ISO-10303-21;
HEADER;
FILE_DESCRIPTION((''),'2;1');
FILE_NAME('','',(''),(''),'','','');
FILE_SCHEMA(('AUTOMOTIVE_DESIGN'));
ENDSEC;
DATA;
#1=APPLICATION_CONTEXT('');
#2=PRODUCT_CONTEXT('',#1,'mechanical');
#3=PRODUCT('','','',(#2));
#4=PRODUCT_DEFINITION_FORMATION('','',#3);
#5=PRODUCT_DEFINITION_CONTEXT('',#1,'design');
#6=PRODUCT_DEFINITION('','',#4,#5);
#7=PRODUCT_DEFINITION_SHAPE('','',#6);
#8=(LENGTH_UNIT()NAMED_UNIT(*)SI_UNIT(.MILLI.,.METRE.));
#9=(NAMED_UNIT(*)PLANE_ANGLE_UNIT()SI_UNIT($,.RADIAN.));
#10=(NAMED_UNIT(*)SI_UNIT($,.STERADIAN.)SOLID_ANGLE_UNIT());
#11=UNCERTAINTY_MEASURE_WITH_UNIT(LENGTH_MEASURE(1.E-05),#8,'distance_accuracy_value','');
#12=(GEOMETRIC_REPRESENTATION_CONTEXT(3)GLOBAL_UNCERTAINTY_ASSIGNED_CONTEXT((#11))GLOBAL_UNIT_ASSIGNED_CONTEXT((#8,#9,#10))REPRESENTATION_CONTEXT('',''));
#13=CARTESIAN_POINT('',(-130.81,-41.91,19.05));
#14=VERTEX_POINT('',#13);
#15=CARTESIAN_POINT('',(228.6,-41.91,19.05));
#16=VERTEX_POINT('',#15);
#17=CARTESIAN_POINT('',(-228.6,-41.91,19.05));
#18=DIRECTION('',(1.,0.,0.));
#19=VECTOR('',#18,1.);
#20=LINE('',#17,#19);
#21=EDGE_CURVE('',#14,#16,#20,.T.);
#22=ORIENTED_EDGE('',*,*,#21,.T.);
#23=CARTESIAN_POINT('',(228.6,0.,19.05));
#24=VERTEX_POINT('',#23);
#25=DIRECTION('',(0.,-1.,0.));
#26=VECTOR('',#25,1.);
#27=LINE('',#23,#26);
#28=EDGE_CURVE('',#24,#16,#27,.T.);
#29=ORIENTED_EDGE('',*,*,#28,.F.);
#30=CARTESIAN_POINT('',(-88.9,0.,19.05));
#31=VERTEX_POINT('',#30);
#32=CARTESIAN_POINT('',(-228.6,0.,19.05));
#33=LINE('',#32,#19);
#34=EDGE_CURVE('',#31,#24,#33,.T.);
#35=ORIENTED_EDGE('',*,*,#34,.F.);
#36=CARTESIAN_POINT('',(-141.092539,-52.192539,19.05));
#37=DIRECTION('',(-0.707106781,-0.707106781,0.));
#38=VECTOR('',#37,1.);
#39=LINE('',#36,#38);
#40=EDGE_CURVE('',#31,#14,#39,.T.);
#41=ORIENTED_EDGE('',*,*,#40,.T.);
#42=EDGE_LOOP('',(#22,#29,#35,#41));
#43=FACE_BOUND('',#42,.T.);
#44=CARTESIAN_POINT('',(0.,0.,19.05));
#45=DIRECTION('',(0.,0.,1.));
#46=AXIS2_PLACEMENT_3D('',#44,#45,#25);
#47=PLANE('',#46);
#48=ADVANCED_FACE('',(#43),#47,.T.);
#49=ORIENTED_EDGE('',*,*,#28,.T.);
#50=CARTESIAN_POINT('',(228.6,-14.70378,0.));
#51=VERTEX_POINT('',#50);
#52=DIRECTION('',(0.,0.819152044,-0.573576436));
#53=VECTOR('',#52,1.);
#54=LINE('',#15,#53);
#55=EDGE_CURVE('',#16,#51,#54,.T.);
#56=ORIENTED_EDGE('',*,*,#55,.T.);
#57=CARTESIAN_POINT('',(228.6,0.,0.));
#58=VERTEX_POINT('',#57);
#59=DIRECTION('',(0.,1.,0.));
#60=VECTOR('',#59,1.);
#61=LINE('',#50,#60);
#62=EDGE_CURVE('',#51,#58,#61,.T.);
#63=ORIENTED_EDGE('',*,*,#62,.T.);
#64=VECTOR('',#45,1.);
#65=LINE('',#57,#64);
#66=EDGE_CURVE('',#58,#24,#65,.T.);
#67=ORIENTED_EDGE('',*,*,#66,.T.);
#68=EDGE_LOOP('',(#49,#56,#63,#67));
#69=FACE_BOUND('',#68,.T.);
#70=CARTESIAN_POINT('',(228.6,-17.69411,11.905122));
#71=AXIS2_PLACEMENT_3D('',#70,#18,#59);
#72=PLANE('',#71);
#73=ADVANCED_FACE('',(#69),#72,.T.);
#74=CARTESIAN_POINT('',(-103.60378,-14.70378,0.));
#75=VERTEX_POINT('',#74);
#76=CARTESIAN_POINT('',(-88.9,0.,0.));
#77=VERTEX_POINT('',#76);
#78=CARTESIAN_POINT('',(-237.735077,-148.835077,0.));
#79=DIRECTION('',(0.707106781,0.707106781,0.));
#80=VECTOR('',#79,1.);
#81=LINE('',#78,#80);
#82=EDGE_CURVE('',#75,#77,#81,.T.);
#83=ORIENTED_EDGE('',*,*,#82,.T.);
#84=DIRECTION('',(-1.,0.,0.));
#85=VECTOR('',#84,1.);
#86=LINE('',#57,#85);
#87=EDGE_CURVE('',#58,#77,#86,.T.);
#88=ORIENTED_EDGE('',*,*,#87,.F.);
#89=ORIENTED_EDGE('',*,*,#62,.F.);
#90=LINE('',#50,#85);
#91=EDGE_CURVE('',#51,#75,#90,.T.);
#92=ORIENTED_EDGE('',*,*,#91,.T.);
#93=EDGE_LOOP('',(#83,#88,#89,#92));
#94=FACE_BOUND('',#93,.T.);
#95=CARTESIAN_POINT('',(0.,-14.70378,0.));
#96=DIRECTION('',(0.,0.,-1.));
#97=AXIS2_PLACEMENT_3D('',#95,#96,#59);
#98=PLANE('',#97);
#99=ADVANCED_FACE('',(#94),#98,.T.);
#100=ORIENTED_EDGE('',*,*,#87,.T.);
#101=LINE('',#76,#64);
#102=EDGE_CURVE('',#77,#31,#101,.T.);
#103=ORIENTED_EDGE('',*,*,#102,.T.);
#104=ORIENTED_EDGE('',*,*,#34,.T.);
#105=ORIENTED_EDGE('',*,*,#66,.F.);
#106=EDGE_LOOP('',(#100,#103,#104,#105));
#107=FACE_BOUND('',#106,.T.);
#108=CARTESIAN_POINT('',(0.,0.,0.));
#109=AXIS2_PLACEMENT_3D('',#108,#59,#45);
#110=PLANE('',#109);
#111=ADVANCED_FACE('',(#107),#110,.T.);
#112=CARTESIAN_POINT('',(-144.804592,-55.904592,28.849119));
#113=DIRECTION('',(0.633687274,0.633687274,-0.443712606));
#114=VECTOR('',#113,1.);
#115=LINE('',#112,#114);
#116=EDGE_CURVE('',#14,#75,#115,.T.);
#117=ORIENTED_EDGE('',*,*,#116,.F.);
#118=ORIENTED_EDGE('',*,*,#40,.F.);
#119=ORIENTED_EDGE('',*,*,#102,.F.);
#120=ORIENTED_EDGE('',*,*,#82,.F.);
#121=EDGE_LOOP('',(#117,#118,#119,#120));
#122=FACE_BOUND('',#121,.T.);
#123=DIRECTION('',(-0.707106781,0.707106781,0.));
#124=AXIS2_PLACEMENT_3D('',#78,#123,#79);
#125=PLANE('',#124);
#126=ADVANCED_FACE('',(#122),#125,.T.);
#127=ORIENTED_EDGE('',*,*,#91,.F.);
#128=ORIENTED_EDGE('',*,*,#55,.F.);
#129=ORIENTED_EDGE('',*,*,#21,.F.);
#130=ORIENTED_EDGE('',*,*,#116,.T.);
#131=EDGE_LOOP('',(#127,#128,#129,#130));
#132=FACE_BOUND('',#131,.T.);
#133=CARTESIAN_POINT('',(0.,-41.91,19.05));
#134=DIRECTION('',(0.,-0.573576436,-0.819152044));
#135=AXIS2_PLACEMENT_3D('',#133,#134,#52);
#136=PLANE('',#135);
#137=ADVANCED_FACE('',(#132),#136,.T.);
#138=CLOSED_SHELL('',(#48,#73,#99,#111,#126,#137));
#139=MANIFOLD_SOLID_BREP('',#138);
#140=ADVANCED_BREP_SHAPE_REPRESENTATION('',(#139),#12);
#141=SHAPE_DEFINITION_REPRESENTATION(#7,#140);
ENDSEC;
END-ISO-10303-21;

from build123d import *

# Parameters (mm, degrees)
F1_DEPTH      = 228.6
F1_DEPTH_BACK = 228.6
F3_DEPTH      = 19.051


# Not quite as in the source:
# - a feature names something its author has since deleted; it is built from what else it names


with BuildPart() as f1:
    # F0 (on Right) → F1 (new body, two sides)
    with BuildSketch(Plane.YZ) as f1_sk:
        Polygon((0, 0), (0, 19.05), (-41.91, 19.05), (-14.7037804716, 0), align=None)
    extrude(amount=F1_DEPTH)
    extrude(f1_sk.sketch, amount=-F1_DEPTH_BACK)

    # F2 (on Top) → F3 (cut, through all)
    with BuildSketch(Plane.XY):
        Polygon((-237.7350770505, -148.8350770505), (-88.9, 0), (-237.7350770505, 0), align=None)
    extrude(amount=F3_DEPTH, mode=Mode.SUBTRACT)


solid = f1.part
